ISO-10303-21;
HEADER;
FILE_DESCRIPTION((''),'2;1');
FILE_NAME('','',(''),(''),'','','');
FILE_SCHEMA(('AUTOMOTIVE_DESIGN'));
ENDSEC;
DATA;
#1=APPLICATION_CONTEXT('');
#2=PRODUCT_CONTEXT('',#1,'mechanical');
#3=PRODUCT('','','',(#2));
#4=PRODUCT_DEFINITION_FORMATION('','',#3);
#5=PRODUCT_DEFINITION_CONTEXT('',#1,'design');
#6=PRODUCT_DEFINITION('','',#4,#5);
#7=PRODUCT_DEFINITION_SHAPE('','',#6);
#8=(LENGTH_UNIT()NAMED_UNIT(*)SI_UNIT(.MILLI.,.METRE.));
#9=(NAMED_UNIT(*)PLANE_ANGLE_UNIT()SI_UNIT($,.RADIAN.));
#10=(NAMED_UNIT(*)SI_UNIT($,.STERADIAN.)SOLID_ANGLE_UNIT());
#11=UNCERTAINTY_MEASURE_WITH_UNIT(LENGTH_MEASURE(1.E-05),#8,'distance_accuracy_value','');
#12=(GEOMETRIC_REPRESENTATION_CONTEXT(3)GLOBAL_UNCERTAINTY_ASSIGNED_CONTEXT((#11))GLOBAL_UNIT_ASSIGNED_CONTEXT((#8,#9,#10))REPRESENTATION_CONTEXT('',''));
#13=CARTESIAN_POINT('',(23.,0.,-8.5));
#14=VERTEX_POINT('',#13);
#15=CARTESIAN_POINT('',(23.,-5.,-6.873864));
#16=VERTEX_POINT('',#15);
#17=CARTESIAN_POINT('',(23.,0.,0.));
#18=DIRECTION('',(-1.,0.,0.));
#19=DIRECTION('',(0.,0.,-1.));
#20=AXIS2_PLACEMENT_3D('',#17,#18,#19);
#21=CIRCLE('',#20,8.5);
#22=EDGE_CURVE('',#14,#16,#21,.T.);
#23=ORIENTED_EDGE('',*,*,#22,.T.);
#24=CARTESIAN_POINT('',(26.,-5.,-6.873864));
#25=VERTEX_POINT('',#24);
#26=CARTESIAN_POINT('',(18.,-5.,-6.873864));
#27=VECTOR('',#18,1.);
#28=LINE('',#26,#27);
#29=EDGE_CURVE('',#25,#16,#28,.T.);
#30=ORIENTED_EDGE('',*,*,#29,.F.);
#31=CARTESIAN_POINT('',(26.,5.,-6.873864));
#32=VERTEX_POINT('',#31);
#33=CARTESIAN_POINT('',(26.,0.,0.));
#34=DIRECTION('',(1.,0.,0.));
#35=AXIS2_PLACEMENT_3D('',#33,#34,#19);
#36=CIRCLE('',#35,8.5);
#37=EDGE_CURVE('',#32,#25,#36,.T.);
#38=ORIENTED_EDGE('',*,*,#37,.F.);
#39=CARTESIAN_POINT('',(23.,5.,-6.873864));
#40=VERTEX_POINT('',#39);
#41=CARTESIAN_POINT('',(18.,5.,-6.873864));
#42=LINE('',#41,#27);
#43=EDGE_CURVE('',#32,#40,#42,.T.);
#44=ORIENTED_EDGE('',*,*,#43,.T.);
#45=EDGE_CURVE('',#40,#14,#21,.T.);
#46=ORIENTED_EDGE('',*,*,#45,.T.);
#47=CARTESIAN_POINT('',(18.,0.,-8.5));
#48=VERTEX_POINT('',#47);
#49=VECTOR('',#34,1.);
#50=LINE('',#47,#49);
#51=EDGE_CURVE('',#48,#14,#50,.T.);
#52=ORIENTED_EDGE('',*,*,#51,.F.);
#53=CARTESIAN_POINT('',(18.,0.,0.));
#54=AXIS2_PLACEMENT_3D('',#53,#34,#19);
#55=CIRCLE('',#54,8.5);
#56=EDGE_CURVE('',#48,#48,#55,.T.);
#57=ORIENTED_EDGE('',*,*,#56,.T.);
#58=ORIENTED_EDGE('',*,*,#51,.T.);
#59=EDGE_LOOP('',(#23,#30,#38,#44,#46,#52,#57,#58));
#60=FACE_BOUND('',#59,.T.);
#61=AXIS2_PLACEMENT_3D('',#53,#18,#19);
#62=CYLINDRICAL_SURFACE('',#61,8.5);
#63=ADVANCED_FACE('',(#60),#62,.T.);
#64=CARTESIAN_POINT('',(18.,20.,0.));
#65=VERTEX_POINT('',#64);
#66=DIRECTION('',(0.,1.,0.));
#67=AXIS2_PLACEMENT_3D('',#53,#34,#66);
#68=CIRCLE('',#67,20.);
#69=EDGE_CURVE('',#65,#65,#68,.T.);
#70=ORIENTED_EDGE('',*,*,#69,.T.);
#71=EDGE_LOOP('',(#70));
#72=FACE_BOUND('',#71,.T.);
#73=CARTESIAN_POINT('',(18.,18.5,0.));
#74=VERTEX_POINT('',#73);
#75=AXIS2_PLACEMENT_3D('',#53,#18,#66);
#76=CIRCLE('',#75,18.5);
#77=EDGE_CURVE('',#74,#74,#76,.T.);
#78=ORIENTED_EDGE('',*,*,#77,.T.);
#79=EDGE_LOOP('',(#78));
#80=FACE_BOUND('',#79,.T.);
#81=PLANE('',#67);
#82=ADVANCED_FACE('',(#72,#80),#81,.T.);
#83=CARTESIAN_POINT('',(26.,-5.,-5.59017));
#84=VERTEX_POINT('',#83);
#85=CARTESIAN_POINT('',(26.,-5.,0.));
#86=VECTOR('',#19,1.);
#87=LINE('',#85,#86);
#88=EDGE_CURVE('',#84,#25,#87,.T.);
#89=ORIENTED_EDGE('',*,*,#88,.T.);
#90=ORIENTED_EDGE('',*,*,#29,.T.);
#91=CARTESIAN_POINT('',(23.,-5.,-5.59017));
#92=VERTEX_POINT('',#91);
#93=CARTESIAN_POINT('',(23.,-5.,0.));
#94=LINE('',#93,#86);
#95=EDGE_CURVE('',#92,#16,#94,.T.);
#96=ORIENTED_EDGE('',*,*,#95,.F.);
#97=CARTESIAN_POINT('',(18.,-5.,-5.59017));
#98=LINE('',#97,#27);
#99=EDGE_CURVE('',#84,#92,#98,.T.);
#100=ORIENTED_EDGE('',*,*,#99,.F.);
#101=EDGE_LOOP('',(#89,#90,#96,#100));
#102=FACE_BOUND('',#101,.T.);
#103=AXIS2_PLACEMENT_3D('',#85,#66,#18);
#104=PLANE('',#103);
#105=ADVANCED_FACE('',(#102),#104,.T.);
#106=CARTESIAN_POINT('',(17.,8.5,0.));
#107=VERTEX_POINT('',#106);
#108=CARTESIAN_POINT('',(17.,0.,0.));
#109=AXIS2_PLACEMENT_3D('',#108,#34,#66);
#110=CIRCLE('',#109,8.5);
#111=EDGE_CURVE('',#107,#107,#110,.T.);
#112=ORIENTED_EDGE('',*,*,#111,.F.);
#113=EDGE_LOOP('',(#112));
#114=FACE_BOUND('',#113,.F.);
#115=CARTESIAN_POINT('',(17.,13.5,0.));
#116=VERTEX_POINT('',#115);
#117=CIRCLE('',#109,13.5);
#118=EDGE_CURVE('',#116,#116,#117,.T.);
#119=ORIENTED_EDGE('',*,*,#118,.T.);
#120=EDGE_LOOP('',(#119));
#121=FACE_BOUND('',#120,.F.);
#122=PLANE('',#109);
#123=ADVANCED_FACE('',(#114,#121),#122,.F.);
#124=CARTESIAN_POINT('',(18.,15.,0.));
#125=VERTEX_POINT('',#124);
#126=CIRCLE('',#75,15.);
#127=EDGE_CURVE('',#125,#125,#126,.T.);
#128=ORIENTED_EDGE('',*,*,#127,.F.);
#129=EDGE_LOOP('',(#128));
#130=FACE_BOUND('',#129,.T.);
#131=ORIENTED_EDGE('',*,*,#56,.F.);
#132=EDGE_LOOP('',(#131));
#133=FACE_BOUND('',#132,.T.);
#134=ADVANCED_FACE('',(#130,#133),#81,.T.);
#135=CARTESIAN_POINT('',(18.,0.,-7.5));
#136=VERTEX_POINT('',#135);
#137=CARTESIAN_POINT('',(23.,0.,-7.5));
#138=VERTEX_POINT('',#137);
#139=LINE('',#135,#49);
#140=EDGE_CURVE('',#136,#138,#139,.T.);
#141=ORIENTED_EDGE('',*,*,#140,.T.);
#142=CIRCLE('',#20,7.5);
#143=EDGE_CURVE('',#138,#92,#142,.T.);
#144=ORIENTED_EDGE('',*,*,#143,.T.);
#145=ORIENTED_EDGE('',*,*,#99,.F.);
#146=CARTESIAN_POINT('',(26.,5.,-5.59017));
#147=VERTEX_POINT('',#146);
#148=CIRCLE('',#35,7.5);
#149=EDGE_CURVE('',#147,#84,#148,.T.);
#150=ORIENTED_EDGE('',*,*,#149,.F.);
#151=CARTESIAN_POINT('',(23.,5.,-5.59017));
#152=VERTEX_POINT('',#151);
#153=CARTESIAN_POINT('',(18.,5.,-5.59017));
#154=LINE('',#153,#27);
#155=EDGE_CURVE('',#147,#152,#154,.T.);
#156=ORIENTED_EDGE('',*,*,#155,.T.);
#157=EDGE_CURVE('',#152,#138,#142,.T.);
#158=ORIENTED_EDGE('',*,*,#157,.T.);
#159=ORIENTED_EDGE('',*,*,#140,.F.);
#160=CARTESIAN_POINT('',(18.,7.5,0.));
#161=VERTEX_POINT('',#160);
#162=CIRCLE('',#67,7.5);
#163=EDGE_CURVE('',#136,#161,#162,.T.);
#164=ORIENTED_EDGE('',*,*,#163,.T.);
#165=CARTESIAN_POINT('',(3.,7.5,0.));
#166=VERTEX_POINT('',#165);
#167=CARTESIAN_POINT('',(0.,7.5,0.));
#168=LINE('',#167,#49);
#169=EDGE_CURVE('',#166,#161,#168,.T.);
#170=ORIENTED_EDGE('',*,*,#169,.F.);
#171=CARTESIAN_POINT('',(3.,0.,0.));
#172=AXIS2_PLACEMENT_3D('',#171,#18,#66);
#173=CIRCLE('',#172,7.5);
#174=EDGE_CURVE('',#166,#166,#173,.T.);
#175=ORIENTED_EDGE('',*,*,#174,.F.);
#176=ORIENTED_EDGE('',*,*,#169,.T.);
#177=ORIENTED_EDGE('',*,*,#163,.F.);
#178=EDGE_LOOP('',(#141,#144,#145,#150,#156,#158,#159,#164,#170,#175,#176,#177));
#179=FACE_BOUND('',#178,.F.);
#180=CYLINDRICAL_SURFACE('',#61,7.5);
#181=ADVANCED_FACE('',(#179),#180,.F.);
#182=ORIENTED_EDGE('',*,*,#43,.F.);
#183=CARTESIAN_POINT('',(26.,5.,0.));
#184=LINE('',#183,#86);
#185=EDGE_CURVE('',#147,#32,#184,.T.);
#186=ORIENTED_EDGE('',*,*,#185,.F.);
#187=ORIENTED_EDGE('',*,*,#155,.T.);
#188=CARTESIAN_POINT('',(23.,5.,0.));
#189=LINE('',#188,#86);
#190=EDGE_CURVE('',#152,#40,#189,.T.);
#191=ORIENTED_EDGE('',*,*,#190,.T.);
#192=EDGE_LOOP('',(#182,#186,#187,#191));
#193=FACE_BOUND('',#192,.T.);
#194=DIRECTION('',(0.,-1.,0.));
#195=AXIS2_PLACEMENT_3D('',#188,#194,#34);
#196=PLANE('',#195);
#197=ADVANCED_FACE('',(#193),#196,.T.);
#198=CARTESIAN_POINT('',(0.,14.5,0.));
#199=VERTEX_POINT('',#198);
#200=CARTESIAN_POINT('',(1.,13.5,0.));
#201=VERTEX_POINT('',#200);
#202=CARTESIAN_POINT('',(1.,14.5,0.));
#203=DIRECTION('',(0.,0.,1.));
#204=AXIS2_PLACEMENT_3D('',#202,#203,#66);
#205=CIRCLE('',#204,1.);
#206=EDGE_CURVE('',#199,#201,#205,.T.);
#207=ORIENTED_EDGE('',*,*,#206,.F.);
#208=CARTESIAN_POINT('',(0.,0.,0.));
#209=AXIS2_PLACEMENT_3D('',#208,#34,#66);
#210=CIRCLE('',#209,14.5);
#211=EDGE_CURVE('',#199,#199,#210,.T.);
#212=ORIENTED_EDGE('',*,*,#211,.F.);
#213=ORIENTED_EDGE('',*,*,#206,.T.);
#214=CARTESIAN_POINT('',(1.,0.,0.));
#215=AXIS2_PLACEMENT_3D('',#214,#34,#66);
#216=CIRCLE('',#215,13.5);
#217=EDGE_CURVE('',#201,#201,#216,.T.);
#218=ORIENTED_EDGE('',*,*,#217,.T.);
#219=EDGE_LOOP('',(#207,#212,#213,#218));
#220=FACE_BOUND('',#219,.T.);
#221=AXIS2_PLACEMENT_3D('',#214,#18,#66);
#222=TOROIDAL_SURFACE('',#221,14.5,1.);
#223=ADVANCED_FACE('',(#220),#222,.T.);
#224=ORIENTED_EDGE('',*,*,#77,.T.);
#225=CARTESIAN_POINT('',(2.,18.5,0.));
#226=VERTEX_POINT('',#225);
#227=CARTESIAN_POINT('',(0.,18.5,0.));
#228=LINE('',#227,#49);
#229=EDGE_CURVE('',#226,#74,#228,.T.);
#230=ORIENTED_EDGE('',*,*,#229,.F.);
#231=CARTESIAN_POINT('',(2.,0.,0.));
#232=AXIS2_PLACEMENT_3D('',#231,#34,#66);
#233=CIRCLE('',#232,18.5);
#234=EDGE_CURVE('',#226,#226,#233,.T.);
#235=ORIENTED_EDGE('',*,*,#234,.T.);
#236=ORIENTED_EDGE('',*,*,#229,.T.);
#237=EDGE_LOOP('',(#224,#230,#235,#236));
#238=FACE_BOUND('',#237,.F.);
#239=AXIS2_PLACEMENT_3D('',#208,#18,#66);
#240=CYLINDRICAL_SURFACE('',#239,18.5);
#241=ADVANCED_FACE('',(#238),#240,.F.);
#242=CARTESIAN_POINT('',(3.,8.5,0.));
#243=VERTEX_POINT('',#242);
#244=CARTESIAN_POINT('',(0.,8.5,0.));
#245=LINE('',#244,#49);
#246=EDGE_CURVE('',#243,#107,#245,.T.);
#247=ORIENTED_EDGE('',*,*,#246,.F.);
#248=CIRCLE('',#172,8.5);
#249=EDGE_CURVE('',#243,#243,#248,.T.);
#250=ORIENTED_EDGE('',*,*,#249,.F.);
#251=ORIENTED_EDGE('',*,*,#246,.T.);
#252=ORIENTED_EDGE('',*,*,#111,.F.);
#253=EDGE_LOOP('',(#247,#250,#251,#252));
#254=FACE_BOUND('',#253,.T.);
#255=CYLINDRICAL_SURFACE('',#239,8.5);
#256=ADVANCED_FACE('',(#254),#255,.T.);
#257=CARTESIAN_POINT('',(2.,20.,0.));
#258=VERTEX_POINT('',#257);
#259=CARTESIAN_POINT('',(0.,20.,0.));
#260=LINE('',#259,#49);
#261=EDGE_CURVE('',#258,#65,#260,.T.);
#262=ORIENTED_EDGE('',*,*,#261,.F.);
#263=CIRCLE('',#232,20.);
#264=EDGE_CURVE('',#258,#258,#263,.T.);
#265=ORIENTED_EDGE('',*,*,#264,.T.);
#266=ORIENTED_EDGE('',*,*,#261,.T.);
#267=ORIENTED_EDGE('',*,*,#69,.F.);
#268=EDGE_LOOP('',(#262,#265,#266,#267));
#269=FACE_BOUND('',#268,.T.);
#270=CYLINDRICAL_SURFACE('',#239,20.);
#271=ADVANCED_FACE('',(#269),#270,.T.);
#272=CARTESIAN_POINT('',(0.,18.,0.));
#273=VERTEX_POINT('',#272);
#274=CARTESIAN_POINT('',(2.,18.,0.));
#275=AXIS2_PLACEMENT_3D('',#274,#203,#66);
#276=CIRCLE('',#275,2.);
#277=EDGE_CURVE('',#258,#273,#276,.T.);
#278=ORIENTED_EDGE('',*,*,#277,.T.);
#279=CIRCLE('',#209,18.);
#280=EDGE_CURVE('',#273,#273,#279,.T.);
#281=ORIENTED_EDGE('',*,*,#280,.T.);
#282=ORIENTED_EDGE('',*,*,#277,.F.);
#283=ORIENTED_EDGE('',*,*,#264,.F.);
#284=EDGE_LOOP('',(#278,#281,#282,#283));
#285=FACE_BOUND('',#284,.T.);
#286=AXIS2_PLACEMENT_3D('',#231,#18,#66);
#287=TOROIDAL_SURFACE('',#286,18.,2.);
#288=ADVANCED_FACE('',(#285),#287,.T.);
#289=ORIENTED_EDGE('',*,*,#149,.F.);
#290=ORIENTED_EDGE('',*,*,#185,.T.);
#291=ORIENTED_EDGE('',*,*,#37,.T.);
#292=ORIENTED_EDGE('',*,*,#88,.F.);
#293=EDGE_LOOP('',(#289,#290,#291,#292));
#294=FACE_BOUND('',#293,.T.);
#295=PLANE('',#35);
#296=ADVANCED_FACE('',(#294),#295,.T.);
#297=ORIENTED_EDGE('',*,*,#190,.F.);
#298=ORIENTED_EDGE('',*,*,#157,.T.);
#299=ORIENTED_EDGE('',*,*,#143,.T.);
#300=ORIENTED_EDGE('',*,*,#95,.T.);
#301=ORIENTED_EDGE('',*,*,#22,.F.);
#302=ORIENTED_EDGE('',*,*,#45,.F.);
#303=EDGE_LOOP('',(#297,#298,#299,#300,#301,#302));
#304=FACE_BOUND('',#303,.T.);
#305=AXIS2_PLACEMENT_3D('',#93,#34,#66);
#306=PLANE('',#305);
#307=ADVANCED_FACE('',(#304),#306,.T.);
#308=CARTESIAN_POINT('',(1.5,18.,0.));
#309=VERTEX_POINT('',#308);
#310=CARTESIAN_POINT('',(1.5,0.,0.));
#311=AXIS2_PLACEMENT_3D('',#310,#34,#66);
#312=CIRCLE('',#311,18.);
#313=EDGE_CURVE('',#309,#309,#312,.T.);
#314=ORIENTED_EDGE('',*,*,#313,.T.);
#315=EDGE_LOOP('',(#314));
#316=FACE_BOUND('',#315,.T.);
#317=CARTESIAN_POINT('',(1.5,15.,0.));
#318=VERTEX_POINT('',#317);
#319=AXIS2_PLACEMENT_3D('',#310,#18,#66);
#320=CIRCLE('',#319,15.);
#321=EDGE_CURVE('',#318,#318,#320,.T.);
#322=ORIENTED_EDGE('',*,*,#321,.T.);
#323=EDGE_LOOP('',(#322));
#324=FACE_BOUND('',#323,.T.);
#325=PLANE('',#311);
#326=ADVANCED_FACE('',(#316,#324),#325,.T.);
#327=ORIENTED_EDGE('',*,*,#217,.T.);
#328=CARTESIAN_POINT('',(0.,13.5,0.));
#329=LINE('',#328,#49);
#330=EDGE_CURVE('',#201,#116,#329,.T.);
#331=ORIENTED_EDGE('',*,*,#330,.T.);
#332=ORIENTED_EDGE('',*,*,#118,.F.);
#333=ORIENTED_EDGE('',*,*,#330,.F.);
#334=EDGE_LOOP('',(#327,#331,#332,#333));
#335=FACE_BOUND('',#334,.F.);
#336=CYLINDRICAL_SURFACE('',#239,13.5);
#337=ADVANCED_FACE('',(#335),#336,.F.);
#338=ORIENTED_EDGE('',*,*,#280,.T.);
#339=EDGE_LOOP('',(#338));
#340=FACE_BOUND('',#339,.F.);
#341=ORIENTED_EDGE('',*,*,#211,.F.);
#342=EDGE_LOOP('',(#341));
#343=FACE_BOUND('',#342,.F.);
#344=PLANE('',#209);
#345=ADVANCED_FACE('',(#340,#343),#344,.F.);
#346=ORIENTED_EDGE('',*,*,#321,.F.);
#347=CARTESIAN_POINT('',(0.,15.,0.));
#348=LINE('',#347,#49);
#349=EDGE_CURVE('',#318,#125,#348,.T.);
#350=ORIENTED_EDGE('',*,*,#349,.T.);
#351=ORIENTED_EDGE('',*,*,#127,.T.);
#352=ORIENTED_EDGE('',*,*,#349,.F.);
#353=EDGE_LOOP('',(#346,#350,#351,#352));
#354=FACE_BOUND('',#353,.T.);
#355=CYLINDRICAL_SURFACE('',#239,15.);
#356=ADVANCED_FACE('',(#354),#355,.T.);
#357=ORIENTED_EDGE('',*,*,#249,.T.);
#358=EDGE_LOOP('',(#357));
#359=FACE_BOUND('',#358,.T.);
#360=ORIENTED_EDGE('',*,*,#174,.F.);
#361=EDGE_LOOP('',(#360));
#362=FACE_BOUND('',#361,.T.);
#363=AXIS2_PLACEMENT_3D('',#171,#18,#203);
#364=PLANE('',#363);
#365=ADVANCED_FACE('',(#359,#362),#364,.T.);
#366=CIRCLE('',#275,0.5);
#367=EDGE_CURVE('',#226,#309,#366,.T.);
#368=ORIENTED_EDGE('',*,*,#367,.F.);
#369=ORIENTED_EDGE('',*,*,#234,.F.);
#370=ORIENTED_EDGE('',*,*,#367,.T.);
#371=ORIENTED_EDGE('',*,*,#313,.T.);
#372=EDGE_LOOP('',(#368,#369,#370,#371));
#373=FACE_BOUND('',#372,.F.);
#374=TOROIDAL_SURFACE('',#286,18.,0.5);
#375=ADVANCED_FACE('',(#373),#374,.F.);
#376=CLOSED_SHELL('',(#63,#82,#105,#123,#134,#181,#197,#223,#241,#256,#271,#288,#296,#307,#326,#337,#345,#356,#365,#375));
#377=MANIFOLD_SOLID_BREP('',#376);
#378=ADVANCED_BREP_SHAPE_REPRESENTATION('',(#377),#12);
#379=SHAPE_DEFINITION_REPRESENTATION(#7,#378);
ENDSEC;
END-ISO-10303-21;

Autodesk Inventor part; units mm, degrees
ref_plane "XZ Plane" through (0, 0, 0) normal (0, 1, 0) x (-1, 0, 0)
ref_plane "XY Plane" through (0, 0, 0) normal (0, 0, 1) x (1, 0, 0)
ref_plane "Work Plane1" through (20, 0, 0) normal (1, 0, 0) x (0, 1, 0)
sketch "Sketch7" plane through (0, 0, 0) normal (1, 0, 0) x (0, 1, 0)
  circle A0 centre (0, 0) radius 7.5
  circle A1 centre (0, 0) radius 20
  dimension "d28" = 15
  dimension "d29" = 40
extrude "Wheel" add sketch "Sketch7" along normal blind 18
sketch "Sketch8" plane through (0, 0, 0) normal (1, 0, 0) x (0, 1, 0)
  circle A0 centre (0, 0) radius 8.5
  circle A1 centre (0, 0) radius 13.5
  dimension "d32" = 17
  dimension "d33" = 27
extrude "Extrusion7" cut sketch "Sketch8" along normal blind 17
sketch "Sketch9" plane through (0, 0, 0) normal (-1, 0, 0) x (0, 0, 1)
  circle A0 centre (0, 0) radius 11.0642
extrude "Extrusion8" cut sketch "Sketch9" against normal blind 3
fillet "Fillet1" radius 2 1 edges at (0, -20, 0)
fillet "Fillet2" radius 1 1 edges at (0, -13.5, 0)
shell "Shell1" thickness 1.5 removed faces 1 at (18, 15.6396, -1.5954)
sketch "Sketch10" plane through (18, 0, 0) normal (1, 0, 0) x (0, 0, -1)
  circle A0 centre (0, 0) radius 8.5
  circle A1 centre (0, 0) radius 7.5 projected
  dimension "d41" = 17
extrude "Extrusion9" add sketch "Sketch10" along normal blind 8
sketch "Sketch11" plane through (0, 0, 0) normal (0, 0, 1) x (1, 0, 0)
  line L0 (26, -8.5) -> (26, 8.5) projected
  line L1 (18, 8.5) -> (18, -8.5) projected
  line L2 (26, 7.5) -> (26, -7.5) projected
  line L3 (26, -5) -> (23, -5)
  line L4 (23, -5) -> (23, 5)
  line L5 (23, 5) -> (26, 5)
  line L6 (26, 5) -> (26, -5)
  line L7 (0, 0) -> (9.4673, 0) construction
  dimension "d44" = 3
  dimension "d45" = 10
  dimension "d46" = 5
extrude "Extrusion10" cut sketch "Sketch11" against normal blind 20
equation "\"d46\" = 0.5 * d45"
properties part number "RearWheelLeft"
